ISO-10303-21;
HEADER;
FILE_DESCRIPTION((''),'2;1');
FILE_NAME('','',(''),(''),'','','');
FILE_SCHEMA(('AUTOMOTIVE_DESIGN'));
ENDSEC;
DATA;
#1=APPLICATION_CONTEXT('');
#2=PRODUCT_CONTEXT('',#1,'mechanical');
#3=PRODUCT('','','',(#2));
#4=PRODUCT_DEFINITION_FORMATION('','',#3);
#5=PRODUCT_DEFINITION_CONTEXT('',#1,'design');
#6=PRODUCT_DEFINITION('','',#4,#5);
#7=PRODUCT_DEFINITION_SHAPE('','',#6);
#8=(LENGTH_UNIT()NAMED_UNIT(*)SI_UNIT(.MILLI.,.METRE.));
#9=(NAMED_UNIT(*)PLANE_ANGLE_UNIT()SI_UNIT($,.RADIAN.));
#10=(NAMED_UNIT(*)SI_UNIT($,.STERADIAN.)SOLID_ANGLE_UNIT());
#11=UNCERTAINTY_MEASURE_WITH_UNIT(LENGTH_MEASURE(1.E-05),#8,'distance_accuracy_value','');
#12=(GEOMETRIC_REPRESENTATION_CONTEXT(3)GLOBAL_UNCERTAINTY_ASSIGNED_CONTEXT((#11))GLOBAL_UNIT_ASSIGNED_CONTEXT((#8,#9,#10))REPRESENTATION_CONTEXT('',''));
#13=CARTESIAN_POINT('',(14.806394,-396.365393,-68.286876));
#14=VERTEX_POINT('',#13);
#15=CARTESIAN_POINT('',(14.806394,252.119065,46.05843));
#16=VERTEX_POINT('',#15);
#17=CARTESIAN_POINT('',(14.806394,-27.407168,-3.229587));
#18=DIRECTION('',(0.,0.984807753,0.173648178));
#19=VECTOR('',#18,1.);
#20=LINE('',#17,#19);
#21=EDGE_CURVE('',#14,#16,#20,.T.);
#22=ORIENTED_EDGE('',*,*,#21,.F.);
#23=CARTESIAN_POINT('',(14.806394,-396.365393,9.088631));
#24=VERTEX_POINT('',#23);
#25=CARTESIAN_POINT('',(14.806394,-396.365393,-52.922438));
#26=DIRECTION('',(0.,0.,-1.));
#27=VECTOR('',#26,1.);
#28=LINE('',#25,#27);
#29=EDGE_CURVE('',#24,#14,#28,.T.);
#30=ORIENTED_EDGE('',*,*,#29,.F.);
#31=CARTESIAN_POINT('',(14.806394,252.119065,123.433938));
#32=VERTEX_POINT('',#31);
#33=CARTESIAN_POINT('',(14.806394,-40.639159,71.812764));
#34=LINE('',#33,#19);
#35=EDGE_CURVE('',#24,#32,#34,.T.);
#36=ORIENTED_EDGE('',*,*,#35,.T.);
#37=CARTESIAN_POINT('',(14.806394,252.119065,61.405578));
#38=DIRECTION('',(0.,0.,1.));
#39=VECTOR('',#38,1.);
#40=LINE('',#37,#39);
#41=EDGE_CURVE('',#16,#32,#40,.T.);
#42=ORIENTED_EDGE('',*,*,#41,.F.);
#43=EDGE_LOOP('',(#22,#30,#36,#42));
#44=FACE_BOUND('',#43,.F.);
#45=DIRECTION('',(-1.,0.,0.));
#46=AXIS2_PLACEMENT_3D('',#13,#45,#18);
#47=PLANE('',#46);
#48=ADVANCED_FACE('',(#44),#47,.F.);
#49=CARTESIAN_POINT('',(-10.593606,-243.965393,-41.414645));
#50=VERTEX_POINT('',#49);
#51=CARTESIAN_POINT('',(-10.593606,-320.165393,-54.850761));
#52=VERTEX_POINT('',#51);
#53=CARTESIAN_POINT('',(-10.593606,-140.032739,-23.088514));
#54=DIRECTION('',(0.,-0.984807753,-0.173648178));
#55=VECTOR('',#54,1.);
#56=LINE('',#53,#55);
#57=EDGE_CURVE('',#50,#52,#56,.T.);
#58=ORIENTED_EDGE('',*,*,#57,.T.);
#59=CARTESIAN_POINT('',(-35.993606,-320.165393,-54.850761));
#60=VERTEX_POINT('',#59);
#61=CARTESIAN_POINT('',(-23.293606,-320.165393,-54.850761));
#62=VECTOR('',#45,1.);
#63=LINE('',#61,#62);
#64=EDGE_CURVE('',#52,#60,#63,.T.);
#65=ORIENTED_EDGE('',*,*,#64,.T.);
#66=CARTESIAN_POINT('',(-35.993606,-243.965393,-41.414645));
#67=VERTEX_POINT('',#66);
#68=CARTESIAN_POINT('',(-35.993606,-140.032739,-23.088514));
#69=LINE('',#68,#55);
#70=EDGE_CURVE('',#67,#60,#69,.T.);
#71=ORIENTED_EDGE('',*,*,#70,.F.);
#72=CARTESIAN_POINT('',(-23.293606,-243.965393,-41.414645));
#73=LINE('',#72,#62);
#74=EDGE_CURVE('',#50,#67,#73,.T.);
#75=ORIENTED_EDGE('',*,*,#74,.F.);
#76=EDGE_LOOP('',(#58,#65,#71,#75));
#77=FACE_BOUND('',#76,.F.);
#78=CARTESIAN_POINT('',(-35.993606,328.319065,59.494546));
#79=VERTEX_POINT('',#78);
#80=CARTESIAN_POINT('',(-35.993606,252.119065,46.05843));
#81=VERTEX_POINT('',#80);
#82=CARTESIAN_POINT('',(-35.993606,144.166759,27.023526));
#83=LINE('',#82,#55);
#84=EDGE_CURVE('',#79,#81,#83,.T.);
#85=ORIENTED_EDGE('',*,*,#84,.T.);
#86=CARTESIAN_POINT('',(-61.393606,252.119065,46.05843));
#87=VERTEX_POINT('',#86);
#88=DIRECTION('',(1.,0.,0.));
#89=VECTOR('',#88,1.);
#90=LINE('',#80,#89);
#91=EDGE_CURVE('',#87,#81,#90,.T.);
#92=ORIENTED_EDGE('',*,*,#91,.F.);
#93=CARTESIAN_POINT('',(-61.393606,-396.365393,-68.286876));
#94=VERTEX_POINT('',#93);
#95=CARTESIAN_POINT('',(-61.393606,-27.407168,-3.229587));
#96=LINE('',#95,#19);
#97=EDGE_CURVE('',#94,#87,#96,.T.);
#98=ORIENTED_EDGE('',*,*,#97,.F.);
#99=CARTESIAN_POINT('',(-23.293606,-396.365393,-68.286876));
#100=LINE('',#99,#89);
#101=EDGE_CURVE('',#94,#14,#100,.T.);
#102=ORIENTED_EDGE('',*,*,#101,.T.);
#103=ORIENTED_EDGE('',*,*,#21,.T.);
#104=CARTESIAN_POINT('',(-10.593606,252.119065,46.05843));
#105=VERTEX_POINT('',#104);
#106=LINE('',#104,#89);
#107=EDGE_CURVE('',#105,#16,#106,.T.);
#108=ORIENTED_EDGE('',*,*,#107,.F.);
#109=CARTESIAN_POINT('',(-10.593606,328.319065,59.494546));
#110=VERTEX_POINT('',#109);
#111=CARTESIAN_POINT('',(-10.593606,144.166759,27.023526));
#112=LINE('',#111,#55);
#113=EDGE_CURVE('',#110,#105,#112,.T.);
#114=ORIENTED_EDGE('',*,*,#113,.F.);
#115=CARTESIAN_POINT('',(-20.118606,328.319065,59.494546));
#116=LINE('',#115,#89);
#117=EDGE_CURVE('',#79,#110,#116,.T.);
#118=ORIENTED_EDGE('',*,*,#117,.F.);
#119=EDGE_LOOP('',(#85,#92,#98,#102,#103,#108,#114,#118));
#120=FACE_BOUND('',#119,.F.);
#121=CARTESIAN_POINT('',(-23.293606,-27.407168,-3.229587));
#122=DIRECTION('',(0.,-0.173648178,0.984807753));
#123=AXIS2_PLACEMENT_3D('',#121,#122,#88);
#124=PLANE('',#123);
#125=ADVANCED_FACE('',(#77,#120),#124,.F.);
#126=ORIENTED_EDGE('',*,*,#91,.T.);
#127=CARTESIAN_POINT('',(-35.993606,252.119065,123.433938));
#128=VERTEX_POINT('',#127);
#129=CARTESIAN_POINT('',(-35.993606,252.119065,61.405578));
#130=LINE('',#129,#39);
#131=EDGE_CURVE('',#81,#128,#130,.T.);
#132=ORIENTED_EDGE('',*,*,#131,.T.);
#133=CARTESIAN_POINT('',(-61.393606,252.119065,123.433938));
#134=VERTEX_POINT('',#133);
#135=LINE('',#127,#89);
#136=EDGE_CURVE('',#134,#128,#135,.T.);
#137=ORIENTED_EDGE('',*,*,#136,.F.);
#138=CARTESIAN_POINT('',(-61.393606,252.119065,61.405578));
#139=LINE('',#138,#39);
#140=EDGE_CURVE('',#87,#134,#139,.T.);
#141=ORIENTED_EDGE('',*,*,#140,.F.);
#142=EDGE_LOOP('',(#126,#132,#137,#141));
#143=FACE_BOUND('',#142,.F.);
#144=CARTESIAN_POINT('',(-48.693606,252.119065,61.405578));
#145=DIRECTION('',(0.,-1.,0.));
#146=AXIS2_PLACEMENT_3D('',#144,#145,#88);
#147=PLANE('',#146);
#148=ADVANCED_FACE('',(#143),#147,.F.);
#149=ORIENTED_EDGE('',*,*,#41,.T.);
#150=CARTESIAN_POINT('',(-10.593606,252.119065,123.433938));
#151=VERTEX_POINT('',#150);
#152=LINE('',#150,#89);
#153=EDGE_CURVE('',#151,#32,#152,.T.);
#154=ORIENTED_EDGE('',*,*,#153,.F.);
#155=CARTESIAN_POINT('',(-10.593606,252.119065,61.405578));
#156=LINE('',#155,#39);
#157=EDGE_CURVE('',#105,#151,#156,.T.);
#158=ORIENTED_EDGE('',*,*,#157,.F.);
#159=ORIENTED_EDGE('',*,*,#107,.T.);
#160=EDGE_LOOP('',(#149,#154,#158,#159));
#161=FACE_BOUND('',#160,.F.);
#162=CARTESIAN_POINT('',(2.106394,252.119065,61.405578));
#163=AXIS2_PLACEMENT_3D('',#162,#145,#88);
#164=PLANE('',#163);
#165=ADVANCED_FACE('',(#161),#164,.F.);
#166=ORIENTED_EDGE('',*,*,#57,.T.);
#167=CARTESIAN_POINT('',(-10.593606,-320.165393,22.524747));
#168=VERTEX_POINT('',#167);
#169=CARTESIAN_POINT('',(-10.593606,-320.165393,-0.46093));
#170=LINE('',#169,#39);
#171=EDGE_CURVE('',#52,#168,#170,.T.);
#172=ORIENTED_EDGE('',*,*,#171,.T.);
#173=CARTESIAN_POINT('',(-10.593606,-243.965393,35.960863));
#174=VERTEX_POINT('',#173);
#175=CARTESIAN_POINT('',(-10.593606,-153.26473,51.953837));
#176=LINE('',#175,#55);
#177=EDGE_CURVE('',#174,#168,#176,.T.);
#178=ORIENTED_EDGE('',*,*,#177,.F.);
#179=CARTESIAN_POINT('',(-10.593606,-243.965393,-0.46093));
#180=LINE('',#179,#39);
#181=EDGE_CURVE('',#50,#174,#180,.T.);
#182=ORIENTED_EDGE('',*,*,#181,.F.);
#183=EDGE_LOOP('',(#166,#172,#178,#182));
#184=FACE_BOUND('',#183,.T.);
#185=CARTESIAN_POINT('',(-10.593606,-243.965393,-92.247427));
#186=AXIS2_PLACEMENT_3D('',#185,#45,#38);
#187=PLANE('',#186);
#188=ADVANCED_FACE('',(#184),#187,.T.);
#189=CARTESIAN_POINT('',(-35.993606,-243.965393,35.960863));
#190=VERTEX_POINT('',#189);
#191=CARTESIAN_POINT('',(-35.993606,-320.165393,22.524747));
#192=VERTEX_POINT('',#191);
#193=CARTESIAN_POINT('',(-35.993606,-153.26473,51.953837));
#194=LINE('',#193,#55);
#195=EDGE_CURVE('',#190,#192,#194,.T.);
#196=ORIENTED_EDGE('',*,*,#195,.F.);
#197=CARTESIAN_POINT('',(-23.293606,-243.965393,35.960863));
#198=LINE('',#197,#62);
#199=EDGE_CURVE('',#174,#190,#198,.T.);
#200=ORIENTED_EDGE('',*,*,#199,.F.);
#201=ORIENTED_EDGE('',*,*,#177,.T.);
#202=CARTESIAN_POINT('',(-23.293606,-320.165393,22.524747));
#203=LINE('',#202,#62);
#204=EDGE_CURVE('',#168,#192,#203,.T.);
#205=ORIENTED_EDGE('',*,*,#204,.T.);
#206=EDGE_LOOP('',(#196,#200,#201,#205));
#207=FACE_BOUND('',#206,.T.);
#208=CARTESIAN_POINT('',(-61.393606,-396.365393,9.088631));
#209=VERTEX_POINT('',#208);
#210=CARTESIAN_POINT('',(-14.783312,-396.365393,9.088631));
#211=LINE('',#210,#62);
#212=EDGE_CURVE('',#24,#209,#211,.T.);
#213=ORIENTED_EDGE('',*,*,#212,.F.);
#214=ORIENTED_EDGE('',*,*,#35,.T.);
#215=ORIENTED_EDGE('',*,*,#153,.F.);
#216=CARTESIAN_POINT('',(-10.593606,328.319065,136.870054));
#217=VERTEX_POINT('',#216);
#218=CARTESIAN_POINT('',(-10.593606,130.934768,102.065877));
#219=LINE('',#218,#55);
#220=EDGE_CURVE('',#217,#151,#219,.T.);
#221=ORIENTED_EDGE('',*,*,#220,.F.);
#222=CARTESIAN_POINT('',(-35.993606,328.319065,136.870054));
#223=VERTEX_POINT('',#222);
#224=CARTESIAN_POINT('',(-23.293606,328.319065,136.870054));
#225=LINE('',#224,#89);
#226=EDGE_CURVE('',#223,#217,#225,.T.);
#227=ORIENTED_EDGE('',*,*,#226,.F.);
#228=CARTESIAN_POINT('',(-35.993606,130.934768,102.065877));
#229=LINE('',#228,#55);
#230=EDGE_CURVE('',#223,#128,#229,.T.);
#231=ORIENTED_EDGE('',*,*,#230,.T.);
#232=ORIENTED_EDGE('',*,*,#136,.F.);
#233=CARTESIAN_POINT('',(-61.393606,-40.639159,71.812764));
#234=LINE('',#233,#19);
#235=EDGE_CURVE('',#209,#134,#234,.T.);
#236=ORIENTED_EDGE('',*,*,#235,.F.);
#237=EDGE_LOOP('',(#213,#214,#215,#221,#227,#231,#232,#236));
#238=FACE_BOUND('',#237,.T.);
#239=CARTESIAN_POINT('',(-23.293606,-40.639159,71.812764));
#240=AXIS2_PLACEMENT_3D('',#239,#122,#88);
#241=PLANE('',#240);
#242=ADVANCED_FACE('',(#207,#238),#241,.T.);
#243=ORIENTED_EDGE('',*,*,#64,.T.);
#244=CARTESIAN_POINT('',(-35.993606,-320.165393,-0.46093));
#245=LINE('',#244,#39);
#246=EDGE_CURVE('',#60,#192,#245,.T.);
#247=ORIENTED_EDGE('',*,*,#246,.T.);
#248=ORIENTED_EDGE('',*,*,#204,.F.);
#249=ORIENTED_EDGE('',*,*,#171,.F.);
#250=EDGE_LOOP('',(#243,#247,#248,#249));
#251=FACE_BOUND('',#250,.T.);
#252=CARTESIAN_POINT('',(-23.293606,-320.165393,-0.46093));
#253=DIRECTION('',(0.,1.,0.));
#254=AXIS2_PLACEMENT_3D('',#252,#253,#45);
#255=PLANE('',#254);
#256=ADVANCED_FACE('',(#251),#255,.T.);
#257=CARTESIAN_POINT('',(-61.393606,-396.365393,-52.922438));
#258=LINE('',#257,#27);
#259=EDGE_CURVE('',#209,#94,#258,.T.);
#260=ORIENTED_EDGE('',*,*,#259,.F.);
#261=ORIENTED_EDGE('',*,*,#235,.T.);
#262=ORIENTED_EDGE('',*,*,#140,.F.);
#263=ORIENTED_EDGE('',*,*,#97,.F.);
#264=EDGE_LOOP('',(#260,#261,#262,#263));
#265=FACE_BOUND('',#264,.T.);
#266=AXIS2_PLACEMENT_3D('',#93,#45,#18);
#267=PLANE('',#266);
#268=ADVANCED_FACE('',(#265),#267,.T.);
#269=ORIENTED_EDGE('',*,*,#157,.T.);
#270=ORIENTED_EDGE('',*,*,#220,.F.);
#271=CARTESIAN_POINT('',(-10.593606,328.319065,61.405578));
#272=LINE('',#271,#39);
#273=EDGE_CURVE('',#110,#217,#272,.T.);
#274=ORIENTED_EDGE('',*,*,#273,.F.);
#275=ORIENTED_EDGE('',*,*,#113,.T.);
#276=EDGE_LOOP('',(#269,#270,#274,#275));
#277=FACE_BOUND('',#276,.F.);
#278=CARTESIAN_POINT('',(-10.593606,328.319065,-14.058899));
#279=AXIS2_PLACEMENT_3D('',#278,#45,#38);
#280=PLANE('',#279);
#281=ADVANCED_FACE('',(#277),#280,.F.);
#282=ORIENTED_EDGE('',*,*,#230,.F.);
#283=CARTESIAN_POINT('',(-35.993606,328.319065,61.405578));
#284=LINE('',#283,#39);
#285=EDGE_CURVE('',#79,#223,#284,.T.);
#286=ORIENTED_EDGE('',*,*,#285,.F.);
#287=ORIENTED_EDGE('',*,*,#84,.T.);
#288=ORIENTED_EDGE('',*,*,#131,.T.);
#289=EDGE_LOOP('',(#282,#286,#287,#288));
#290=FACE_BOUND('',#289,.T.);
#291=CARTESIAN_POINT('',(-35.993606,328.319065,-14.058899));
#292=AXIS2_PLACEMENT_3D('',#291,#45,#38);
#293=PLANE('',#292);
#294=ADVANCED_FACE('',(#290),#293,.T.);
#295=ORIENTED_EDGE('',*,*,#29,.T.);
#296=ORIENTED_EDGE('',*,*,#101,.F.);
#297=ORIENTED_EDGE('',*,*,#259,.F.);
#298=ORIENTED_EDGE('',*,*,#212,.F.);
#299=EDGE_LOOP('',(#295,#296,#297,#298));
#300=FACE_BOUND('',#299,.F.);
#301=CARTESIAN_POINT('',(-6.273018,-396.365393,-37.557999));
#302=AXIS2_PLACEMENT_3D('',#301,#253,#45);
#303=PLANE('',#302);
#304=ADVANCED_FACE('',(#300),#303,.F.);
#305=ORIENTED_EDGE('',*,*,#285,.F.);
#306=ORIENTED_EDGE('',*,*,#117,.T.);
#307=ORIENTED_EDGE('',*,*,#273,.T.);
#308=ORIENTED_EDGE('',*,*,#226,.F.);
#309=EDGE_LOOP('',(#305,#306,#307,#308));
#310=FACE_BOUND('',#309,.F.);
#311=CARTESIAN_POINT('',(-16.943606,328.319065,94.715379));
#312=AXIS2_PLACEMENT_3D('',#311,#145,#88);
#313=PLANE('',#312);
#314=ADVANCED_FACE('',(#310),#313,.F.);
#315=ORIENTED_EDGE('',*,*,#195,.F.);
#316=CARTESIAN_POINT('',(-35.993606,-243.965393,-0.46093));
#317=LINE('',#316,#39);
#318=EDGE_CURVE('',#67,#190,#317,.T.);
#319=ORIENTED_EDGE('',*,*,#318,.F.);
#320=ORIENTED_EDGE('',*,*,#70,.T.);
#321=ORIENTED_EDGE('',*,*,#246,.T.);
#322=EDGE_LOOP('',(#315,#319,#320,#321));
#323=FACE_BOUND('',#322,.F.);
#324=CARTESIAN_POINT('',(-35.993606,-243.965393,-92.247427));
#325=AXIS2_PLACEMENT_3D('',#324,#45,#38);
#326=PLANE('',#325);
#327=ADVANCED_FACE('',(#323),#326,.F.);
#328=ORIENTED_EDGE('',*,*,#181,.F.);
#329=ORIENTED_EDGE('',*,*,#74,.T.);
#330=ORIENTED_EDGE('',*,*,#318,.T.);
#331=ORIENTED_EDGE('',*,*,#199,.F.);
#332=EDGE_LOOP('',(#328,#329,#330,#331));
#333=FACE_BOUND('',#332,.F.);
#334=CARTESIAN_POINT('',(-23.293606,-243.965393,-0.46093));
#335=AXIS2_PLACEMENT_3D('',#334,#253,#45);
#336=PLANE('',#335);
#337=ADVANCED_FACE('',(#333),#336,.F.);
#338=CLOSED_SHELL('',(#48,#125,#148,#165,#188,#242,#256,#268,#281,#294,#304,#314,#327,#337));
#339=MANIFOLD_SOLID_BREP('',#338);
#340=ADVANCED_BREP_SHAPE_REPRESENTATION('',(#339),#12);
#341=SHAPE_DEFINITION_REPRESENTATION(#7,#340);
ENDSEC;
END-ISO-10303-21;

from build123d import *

# Parameters (mm, degrees)
F2_W      = 76.2
F2_H      = 749.3
F3_DEPTH  = 76.2
F5_W      = 25.4
F5_H      = 150.9289524655
F6_DEPTH  = 76.2
F7_W      = 88.9
F7_H      = 109.3234665417
F8_DEPTH  = 13.2329911382
F10_W     = 121.5671412647
F10_H     = 124.9910257757
F11_DEPTH = 25.4
F13_W     = 25.4
F13_H     = 183.5729926825
F14_DEPTH = 76.2


with BuildPart() as f3:
    # F2 (on face) → F3 (new body)
    with BuildSketch(Plane(origin=(0, -0.2741353876, 1.5546990396), x_dir=(1, 0, 0), z_dir=(0, -0.1736481777, 0.984807753))):
        with Locations((-23.2936060824, -27.5516035191)):
            Rectangle(F2_W, F2_H)
    extrude(amount=F3_DEPTH)

    # F5 (on face) → F6 (cut)
    with BuildSketch(Plane.XZ.offset(-328.3190653867)):
        with Locations((-48.6936060824, 61.4055776064)):
            Rectangle(F5_W, F5_H)
        with Locations((2.1063939176, 61.4055776064)):
            Rectangle(F5_W, F5_H)
    extrude(amount=F6_DEPTH, mode=Mode.SUBTRACT)

    # F7 (on face) → F8 (cut, through all)
    with BuildSketch(Plane.XZ.offset(-328.3190653867)):
        with Locations((-16.9436060824, 94.7153790316)):
            Rectangle(F7_W, F7_H)
    extrude(amount=-F8_DEPTH, mode=Mode.SUBTRACT)

    # F10 (on face) → F11 (cut)
    with BuildSketch(Plane(origin=(0, -396.3653928071, 0), x_dir=(-1, 0, 0), z_dir=(0, 1, 0))):
        with Locations((6.2730181962, -37.5579986721)):
            Rectangle(F10_W, F10_H)
    extrude(amount=-F11_DEPTH, mode=Mode.SUBTRACT)

    # F13 (on face) → F14 (cut)
    with BuildSketch(Plane(origin=(0, -243.9653928071, 0), x_dir=(-1, 0, 0), z_dir=(0, 1, 0))):
        with Locations((23.2936060824, -0.4609301686)):
            Rectangle(F13_W, F13_H)
    extrude(amount=-F14_DEPTH, mode=Mode.SUBTRACT)


solid = f3.part
